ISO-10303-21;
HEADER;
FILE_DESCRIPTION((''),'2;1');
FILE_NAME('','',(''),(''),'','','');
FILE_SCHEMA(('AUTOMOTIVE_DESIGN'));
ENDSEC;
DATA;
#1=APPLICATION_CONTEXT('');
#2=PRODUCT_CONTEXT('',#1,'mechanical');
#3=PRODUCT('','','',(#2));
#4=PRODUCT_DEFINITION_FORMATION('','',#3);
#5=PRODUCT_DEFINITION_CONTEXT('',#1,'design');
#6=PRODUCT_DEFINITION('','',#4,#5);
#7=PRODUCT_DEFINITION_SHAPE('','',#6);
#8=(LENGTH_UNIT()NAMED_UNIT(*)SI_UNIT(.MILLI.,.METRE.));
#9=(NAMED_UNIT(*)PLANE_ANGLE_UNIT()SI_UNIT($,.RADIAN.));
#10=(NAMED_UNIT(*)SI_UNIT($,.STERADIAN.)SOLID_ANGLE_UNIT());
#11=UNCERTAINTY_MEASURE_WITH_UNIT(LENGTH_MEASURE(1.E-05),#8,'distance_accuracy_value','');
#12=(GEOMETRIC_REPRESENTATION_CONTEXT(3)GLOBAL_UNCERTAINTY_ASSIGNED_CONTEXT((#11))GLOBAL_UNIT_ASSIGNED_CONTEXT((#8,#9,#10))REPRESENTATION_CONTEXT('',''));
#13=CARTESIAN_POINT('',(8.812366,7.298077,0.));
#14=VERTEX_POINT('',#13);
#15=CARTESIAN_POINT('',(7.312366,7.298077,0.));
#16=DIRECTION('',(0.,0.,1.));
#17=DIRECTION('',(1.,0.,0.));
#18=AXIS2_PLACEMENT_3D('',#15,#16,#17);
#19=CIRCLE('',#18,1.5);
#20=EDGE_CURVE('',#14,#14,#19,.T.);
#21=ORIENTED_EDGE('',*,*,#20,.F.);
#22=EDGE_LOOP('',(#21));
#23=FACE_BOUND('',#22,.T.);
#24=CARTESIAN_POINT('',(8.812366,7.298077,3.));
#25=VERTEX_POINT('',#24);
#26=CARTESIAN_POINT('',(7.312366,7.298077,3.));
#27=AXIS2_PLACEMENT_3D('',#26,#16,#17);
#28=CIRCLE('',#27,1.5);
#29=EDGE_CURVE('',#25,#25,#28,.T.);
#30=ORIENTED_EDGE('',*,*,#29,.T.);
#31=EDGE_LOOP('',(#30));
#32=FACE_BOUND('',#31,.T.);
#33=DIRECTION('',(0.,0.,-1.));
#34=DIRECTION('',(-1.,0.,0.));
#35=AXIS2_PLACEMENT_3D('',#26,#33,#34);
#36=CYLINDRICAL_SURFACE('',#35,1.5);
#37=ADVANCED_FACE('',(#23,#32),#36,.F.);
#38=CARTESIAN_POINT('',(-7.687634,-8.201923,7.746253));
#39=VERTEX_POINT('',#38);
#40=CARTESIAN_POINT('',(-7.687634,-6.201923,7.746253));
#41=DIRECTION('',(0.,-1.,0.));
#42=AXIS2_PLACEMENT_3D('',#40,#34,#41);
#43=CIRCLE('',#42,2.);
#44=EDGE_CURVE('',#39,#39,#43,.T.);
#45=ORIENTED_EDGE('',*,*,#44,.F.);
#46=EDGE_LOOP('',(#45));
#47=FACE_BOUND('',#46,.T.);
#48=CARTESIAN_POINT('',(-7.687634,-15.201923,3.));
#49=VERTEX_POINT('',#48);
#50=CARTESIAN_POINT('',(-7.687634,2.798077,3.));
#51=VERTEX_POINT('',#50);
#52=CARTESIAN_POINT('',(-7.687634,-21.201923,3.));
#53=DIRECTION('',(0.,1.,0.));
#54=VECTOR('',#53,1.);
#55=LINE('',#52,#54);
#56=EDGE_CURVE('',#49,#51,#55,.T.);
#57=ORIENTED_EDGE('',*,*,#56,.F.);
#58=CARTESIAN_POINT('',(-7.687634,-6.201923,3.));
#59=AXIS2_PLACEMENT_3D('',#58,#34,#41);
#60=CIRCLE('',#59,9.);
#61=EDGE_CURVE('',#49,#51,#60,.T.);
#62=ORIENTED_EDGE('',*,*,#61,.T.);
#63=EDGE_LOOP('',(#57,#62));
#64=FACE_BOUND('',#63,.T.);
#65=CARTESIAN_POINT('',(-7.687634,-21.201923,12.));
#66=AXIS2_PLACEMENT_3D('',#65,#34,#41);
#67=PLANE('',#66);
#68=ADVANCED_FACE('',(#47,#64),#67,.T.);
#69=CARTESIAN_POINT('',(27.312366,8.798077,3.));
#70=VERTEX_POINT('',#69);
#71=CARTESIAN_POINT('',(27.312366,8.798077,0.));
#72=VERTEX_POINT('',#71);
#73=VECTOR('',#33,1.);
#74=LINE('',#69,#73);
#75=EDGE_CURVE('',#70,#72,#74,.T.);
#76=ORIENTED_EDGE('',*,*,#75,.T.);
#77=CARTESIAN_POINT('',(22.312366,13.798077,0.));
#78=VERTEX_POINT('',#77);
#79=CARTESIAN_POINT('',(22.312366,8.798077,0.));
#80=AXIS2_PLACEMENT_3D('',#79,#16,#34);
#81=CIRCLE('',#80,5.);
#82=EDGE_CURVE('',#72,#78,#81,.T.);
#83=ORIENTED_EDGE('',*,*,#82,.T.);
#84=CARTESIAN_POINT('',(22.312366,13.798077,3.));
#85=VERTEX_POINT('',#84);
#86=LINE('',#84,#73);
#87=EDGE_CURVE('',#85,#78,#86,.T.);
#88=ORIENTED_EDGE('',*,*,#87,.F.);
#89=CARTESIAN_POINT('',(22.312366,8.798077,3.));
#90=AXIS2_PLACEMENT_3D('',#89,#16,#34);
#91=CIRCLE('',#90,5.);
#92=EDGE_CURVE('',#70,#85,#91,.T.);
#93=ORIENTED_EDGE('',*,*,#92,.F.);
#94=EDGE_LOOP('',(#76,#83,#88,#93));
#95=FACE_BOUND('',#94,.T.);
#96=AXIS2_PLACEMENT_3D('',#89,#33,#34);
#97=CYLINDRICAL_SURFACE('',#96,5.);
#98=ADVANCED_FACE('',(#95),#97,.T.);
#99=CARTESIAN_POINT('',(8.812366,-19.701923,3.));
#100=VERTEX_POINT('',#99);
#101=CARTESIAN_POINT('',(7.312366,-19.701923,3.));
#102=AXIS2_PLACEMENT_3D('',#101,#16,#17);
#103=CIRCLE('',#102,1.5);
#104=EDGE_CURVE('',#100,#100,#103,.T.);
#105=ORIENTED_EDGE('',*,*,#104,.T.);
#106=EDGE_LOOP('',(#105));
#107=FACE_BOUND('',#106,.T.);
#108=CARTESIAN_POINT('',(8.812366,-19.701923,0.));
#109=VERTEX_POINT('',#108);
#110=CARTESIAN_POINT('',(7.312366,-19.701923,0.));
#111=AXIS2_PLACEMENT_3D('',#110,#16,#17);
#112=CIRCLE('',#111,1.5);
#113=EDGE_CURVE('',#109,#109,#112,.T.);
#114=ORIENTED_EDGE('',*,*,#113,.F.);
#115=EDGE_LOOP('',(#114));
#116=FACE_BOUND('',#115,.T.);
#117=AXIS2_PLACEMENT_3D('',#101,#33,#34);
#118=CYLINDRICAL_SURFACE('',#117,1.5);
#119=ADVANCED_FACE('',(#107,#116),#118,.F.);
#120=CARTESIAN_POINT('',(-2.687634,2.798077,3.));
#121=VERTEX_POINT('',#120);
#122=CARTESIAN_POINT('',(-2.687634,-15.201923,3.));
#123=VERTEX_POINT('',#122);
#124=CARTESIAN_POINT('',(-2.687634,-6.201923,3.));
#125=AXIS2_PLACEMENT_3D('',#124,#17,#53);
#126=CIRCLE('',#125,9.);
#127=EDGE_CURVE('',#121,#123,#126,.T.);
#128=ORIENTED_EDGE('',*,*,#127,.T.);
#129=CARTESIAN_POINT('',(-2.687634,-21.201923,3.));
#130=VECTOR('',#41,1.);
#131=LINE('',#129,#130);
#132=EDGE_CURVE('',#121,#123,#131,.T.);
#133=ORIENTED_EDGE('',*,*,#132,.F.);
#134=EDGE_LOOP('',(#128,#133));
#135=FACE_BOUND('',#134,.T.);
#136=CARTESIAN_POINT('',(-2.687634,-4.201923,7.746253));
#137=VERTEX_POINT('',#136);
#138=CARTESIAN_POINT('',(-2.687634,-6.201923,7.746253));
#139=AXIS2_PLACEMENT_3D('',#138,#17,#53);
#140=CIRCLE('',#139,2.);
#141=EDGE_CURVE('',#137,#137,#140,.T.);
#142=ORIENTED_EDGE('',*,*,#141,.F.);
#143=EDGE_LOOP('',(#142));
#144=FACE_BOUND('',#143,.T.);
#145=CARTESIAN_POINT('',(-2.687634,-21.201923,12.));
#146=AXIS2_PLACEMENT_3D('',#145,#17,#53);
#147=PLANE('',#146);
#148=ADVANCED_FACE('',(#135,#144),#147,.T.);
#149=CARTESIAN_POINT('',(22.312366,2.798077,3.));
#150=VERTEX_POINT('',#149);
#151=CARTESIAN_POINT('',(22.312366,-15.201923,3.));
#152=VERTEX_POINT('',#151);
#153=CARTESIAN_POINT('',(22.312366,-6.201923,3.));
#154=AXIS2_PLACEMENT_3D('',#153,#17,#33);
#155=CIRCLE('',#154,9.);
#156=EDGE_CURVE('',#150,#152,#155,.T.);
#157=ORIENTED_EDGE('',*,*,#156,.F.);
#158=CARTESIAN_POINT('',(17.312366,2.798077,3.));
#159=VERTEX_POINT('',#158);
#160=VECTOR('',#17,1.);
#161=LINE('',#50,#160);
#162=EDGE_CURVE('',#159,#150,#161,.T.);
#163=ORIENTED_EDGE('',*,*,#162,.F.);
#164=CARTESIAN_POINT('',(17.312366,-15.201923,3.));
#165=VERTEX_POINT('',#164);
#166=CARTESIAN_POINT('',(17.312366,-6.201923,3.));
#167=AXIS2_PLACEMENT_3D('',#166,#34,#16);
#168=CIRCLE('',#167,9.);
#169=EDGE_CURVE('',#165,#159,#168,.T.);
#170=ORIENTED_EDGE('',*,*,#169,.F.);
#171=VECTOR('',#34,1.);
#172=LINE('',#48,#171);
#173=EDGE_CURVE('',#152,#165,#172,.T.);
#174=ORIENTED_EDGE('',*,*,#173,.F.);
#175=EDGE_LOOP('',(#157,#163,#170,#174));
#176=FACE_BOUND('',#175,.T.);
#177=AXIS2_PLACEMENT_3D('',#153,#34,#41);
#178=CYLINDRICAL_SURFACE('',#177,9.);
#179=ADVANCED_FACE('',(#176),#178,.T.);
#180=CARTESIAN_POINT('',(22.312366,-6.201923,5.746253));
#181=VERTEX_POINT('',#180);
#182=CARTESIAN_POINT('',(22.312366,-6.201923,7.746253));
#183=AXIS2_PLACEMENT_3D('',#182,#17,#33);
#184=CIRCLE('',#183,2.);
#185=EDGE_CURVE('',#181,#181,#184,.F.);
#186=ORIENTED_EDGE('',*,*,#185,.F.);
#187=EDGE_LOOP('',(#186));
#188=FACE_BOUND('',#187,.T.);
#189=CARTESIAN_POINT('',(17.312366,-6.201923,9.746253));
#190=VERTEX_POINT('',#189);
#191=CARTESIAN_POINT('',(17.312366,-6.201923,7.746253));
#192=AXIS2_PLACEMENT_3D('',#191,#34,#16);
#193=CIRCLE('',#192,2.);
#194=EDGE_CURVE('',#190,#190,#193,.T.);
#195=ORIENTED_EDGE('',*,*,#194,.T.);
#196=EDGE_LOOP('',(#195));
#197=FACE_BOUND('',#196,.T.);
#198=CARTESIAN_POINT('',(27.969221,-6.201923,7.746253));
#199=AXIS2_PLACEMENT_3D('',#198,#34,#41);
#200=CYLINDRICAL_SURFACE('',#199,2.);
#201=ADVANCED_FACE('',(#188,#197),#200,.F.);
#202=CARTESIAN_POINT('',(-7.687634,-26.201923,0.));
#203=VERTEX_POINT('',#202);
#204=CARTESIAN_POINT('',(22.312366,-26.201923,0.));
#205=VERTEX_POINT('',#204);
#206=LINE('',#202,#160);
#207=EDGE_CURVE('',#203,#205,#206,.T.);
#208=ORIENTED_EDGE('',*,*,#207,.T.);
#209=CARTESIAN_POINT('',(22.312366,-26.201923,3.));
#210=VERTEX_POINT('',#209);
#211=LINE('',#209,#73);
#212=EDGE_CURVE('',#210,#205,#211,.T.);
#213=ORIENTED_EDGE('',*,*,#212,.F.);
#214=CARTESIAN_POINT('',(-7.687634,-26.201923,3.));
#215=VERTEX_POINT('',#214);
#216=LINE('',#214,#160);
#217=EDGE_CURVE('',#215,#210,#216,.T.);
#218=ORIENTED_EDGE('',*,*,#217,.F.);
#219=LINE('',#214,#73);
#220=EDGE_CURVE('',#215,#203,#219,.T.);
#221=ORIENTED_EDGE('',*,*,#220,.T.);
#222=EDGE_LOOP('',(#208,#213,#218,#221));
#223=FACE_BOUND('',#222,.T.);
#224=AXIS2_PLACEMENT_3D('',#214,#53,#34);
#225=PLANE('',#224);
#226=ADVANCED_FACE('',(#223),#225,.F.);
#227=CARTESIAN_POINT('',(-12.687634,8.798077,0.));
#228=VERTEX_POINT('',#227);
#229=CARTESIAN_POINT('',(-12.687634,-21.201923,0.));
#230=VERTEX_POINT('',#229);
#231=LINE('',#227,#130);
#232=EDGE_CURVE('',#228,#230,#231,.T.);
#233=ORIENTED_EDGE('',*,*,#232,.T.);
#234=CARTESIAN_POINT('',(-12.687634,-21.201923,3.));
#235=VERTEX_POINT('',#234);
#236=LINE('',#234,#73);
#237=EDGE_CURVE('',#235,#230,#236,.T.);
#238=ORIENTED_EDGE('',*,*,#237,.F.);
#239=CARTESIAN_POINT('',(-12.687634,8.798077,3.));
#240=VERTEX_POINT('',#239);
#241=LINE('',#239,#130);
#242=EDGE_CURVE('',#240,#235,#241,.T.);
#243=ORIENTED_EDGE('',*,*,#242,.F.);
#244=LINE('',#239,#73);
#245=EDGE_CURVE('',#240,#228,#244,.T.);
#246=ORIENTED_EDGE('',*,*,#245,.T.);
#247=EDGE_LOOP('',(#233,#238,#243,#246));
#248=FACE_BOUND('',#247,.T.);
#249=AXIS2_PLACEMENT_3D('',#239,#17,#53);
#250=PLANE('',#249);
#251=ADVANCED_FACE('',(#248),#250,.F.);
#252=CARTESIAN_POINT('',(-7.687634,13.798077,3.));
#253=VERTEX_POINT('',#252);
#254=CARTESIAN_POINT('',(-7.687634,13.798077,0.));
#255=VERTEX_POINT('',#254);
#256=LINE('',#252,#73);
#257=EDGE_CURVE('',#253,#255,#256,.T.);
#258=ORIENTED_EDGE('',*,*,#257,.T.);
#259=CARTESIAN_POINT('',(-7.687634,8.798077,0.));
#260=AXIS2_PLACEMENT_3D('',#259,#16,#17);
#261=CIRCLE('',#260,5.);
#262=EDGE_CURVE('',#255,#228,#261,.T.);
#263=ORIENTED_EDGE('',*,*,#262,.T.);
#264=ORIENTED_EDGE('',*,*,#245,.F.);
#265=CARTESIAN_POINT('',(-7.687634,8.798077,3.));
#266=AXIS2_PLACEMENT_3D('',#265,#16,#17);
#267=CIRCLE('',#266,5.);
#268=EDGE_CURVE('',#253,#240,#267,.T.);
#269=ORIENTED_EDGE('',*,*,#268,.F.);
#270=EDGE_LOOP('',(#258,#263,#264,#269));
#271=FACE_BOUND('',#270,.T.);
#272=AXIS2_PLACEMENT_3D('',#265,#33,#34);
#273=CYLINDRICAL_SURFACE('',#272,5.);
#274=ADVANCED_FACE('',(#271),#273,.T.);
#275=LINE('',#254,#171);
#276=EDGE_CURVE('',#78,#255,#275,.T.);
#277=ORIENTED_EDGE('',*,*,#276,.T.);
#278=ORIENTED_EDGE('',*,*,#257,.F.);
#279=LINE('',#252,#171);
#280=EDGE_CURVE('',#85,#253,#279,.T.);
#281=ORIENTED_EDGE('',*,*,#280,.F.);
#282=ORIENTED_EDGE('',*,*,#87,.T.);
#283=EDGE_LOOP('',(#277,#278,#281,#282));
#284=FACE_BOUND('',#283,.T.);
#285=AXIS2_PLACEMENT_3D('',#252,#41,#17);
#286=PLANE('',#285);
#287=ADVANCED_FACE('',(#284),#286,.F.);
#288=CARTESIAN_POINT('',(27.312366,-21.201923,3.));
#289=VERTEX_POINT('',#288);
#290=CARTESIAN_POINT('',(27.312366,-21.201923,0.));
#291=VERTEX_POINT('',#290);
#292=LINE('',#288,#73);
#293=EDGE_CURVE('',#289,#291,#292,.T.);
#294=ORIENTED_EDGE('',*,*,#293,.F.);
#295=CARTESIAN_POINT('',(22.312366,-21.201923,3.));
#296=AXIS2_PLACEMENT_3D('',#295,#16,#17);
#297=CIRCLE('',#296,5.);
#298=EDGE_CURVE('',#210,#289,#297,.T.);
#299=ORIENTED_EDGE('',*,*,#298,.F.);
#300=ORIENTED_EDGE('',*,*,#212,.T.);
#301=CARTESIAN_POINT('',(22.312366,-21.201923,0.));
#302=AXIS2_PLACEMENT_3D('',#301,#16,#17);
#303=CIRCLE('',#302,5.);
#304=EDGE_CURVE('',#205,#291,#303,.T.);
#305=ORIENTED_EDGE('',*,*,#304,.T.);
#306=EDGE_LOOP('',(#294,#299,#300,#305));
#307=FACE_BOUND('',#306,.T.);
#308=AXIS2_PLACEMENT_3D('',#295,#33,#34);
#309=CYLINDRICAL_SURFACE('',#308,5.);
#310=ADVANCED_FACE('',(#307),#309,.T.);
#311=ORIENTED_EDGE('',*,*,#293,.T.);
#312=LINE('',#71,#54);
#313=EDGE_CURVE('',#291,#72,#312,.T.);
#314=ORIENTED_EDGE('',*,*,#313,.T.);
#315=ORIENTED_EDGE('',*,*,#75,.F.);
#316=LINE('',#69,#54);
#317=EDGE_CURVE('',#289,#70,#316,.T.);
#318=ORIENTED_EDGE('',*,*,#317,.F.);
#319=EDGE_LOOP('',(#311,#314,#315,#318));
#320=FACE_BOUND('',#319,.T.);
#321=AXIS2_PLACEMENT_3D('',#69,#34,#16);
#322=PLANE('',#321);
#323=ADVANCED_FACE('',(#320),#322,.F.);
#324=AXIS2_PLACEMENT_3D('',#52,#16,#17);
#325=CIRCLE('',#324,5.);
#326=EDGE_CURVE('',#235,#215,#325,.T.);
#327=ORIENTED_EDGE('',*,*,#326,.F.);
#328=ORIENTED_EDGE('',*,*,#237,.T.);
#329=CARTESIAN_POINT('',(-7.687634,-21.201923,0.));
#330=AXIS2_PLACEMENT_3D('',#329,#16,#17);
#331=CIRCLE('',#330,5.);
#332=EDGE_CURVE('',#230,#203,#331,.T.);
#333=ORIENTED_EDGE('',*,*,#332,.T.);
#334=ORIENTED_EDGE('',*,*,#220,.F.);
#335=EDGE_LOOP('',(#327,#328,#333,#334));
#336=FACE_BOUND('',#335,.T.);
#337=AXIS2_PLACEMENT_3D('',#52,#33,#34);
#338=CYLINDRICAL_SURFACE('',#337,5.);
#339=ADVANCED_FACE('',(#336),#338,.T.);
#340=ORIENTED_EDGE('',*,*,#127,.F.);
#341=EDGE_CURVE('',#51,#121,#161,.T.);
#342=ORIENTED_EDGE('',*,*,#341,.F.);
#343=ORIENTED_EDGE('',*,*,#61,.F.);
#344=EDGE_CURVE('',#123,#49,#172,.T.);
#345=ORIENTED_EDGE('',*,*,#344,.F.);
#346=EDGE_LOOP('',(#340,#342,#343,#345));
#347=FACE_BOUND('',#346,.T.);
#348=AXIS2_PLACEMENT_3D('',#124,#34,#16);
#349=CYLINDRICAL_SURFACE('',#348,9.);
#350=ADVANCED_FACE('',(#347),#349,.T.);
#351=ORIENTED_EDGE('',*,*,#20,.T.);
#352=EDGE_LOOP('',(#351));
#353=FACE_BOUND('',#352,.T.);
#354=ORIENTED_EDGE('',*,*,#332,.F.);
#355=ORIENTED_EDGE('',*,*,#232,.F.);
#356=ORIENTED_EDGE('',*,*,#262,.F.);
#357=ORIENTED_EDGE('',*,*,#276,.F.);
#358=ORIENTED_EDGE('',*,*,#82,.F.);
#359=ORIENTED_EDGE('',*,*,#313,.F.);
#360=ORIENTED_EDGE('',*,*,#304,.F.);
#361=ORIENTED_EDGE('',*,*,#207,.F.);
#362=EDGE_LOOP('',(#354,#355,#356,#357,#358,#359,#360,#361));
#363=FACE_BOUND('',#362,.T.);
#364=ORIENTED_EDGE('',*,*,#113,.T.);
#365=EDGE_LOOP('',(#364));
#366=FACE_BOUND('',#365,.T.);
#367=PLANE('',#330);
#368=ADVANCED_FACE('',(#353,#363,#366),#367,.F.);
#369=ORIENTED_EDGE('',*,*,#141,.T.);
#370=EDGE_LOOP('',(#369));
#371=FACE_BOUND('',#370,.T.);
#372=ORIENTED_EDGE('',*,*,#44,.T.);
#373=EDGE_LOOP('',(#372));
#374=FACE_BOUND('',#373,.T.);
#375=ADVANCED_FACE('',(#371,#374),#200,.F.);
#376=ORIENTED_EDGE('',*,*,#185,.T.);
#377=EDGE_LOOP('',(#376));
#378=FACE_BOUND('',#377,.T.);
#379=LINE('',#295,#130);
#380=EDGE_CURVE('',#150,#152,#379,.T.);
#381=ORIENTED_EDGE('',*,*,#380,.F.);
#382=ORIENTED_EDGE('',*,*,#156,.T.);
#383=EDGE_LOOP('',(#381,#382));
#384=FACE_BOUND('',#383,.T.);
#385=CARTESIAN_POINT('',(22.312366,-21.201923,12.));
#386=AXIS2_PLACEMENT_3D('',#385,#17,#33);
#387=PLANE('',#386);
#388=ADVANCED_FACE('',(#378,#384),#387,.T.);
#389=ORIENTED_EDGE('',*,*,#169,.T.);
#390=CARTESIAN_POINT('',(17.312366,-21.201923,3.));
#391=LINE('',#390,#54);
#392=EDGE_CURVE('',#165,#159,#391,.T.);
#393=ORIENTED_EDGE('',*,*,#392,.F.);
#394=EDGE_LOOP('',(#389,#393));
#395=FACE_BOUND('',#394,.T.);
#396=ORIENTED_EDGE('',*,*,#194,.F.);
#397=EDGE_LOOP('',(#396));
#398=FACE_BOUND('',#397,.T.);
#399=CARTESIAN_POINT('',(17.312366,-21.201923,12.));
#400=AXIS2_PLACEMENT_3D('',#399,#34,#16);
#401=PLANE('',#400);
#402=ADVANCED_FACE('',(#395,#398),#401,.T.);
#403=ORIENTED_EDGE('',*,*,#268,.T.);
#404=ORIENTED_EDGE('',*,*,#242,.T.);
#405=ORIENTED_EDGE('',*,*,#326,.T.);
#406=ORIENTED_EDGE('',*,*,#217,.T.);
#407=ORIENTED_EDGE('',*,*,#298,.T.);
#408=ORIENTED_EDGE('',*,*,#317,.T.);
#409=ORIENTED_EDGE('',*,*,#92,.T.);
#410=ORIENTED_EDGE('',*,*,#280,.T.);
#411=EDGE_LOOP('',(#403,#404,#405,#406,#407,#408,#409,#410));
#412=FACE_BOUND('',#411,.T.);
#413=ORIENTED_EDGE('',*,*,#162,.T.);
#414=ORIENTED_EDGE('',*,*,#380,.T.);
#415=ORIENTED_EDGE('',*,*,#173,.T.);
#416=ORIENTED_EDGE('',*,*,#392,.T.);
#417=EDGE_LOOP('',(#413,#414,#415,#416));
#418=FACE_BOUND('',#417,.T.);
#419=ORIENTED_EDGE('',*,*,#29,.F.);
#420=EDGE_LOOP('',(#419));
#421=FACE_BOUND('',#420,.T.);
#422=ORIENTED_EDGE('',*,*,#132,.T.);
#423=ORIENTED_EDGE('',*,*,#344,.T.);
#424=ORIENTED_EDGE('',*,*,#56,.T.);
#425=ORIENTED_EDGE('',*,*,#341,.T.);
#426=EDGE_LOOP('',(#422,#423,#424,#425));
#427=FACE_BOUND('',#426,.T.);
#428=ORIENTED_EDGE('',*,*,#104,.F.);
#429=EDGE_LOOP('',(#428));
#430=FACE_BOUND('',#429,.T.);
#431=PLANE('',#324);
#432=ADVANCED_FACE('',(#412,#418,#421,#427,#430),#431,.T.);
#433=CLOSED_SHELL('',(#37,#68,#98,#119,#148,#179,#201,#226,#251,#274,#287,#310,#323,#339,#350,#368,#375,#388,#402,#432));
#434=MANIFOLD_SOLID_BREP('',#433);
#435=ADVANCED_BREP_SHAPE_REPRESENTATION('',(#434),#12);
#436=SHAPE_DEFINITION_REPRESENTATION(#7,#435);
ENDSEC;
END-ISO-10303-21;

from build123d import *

# Parameters (mm, degrees)
CROQUIS1_R              = 1.5
SALIENTE_EXTRUIR1_DEPTH = 3
SALIENTE_EXTRUIR2_START = 3
CROQUIS2_W              = 5
CROQUIS2_H              = 18
SALIENTE_EXTRUIR2_DEPTH = 9
REDONDEO6_R             = 9
REDONDEO7_R             = 9
CORTAR_EXTRUIR1_REACH   = 47.338
CROQUIS3_R              = 2


with BuildPart() as part:
    # Croquis1 → Saliente-Extruir1 (new body)
    with BuildSketch(Plane.XY):
        with BuildLine():
            Line((-7.68763367, 13.798076923), (22.31236633, 13.798076923))
            ThreePointArc((22.31236633, 13.798076923), (25.847900236, 12.333610829), (27.31236633, 8.798076923))
            Line((27.31236633, 8.798076923), (27.31236633, -21.201923077))
            ThreePointArc((27.31236633, -21.201923077), (25.847900236, -24.737456983), (22.31236633, -26.201923077))
            Line((22.31236633, -26.201923077), (-7.68763367, -26.201923077))
            ThreePointArc((-7.68763367, -26.201923077), (-11.223167576, -24.737456983), (-12.68763367, -21.201923077))
            Line((-12.68763367, -21.201923077), (-12.68763367, 8.798076923))
            ThreePointArc((-12.68763367, 8.798076923), (-11.223167576, 12.333610829), (-7.68763367, 13.798076923))
        make_face()
        with Locations((7.31236633, 7.298076923)):
            Circle(CROQUIS1_R, mode=Mode.SUBTRACT)
        with Locations((7.31236633, -19.701923077)):
            Circle(CROQUIS1_R, mode=Mode.SUBTRACT)
    extrude(amount=SALIENTE_EXTRUIR1_DEPTH)

    # Croquis2 → Saliente-Extruir2 (add)
    with BuildSketch(Plane.XY.offset(SALIENTE_EXTRUIR2_START)):
        with Locations((-5.18763367, -6.201923077)):
            Rectangle(CROQUIS2_W, CROQUIS2_H)
        with Locations((19.81236633, -6.201923077)):
            Rectangle(CROQUIS2_W, CROQUIS2_H)
    extrude(amount=SALIENTE_EXTRUIR2_DEPTH)

    # Redondeo6
    redondeo6_edges = [part.edges().sort_by_distance(p)[0] for p in [
        (-5.18763367, 2.798076923, 12),
        (-5.18763367, -15.201923077, 12),
    ]]
    fillet(redondeo6_edges, radius=REDONDEO6_R - 0.0001)  # a hair under: the kernel refuses the full size

    # Redondeo7
    redondeo7_edges = [part.edges().sort_by_distance(p)[0] for p in [
        (19.81236633, -15.201923077, 12),
        (19.81236633, 2.798076923, 12),
    ]]
    fillet(redondeo7_edges, radius=REDONDEO7_R - 0.0001)  # a hair under: the kernel refuses the full size

    # Cortar-Extruir1: up to this face of the body (flat: up to its plane)
    cortar_extruir1_end = Plane(part.part.faces().sort_by_distance((22.31236633, -6.201923077, 6.819731779))[0])
    # Croquis3 → Cortar-Extruir1 (cut, up to the picked face)
    with BuildSketch(Plane.ZY.offset(7.68763367), mode=Mode.PRIVATE) as cortar_extruir1_sk1:
        with Locations((7.74625312, -6.201923077)):
            Circle(CROQUIS3_R)
    cortar_extruir1_tool1 = split(extrude(cortar_extruir1_sk1.sketch, amount=-CORTAR_EXTRUIR1_REACH, mode=Mode.PRIVATE), bisect_by=cortar_extruir1_end, keep=Keep.BOTH, mode=Mode.PRIVATE)
    add(cortar_extruir1_tool1.solids().sort_by(Axis((-7.687634, -6.201923, 7.746253), (1, 0, 0)))[0], mode=Mode.SUBTRACT)


solid = part.part
